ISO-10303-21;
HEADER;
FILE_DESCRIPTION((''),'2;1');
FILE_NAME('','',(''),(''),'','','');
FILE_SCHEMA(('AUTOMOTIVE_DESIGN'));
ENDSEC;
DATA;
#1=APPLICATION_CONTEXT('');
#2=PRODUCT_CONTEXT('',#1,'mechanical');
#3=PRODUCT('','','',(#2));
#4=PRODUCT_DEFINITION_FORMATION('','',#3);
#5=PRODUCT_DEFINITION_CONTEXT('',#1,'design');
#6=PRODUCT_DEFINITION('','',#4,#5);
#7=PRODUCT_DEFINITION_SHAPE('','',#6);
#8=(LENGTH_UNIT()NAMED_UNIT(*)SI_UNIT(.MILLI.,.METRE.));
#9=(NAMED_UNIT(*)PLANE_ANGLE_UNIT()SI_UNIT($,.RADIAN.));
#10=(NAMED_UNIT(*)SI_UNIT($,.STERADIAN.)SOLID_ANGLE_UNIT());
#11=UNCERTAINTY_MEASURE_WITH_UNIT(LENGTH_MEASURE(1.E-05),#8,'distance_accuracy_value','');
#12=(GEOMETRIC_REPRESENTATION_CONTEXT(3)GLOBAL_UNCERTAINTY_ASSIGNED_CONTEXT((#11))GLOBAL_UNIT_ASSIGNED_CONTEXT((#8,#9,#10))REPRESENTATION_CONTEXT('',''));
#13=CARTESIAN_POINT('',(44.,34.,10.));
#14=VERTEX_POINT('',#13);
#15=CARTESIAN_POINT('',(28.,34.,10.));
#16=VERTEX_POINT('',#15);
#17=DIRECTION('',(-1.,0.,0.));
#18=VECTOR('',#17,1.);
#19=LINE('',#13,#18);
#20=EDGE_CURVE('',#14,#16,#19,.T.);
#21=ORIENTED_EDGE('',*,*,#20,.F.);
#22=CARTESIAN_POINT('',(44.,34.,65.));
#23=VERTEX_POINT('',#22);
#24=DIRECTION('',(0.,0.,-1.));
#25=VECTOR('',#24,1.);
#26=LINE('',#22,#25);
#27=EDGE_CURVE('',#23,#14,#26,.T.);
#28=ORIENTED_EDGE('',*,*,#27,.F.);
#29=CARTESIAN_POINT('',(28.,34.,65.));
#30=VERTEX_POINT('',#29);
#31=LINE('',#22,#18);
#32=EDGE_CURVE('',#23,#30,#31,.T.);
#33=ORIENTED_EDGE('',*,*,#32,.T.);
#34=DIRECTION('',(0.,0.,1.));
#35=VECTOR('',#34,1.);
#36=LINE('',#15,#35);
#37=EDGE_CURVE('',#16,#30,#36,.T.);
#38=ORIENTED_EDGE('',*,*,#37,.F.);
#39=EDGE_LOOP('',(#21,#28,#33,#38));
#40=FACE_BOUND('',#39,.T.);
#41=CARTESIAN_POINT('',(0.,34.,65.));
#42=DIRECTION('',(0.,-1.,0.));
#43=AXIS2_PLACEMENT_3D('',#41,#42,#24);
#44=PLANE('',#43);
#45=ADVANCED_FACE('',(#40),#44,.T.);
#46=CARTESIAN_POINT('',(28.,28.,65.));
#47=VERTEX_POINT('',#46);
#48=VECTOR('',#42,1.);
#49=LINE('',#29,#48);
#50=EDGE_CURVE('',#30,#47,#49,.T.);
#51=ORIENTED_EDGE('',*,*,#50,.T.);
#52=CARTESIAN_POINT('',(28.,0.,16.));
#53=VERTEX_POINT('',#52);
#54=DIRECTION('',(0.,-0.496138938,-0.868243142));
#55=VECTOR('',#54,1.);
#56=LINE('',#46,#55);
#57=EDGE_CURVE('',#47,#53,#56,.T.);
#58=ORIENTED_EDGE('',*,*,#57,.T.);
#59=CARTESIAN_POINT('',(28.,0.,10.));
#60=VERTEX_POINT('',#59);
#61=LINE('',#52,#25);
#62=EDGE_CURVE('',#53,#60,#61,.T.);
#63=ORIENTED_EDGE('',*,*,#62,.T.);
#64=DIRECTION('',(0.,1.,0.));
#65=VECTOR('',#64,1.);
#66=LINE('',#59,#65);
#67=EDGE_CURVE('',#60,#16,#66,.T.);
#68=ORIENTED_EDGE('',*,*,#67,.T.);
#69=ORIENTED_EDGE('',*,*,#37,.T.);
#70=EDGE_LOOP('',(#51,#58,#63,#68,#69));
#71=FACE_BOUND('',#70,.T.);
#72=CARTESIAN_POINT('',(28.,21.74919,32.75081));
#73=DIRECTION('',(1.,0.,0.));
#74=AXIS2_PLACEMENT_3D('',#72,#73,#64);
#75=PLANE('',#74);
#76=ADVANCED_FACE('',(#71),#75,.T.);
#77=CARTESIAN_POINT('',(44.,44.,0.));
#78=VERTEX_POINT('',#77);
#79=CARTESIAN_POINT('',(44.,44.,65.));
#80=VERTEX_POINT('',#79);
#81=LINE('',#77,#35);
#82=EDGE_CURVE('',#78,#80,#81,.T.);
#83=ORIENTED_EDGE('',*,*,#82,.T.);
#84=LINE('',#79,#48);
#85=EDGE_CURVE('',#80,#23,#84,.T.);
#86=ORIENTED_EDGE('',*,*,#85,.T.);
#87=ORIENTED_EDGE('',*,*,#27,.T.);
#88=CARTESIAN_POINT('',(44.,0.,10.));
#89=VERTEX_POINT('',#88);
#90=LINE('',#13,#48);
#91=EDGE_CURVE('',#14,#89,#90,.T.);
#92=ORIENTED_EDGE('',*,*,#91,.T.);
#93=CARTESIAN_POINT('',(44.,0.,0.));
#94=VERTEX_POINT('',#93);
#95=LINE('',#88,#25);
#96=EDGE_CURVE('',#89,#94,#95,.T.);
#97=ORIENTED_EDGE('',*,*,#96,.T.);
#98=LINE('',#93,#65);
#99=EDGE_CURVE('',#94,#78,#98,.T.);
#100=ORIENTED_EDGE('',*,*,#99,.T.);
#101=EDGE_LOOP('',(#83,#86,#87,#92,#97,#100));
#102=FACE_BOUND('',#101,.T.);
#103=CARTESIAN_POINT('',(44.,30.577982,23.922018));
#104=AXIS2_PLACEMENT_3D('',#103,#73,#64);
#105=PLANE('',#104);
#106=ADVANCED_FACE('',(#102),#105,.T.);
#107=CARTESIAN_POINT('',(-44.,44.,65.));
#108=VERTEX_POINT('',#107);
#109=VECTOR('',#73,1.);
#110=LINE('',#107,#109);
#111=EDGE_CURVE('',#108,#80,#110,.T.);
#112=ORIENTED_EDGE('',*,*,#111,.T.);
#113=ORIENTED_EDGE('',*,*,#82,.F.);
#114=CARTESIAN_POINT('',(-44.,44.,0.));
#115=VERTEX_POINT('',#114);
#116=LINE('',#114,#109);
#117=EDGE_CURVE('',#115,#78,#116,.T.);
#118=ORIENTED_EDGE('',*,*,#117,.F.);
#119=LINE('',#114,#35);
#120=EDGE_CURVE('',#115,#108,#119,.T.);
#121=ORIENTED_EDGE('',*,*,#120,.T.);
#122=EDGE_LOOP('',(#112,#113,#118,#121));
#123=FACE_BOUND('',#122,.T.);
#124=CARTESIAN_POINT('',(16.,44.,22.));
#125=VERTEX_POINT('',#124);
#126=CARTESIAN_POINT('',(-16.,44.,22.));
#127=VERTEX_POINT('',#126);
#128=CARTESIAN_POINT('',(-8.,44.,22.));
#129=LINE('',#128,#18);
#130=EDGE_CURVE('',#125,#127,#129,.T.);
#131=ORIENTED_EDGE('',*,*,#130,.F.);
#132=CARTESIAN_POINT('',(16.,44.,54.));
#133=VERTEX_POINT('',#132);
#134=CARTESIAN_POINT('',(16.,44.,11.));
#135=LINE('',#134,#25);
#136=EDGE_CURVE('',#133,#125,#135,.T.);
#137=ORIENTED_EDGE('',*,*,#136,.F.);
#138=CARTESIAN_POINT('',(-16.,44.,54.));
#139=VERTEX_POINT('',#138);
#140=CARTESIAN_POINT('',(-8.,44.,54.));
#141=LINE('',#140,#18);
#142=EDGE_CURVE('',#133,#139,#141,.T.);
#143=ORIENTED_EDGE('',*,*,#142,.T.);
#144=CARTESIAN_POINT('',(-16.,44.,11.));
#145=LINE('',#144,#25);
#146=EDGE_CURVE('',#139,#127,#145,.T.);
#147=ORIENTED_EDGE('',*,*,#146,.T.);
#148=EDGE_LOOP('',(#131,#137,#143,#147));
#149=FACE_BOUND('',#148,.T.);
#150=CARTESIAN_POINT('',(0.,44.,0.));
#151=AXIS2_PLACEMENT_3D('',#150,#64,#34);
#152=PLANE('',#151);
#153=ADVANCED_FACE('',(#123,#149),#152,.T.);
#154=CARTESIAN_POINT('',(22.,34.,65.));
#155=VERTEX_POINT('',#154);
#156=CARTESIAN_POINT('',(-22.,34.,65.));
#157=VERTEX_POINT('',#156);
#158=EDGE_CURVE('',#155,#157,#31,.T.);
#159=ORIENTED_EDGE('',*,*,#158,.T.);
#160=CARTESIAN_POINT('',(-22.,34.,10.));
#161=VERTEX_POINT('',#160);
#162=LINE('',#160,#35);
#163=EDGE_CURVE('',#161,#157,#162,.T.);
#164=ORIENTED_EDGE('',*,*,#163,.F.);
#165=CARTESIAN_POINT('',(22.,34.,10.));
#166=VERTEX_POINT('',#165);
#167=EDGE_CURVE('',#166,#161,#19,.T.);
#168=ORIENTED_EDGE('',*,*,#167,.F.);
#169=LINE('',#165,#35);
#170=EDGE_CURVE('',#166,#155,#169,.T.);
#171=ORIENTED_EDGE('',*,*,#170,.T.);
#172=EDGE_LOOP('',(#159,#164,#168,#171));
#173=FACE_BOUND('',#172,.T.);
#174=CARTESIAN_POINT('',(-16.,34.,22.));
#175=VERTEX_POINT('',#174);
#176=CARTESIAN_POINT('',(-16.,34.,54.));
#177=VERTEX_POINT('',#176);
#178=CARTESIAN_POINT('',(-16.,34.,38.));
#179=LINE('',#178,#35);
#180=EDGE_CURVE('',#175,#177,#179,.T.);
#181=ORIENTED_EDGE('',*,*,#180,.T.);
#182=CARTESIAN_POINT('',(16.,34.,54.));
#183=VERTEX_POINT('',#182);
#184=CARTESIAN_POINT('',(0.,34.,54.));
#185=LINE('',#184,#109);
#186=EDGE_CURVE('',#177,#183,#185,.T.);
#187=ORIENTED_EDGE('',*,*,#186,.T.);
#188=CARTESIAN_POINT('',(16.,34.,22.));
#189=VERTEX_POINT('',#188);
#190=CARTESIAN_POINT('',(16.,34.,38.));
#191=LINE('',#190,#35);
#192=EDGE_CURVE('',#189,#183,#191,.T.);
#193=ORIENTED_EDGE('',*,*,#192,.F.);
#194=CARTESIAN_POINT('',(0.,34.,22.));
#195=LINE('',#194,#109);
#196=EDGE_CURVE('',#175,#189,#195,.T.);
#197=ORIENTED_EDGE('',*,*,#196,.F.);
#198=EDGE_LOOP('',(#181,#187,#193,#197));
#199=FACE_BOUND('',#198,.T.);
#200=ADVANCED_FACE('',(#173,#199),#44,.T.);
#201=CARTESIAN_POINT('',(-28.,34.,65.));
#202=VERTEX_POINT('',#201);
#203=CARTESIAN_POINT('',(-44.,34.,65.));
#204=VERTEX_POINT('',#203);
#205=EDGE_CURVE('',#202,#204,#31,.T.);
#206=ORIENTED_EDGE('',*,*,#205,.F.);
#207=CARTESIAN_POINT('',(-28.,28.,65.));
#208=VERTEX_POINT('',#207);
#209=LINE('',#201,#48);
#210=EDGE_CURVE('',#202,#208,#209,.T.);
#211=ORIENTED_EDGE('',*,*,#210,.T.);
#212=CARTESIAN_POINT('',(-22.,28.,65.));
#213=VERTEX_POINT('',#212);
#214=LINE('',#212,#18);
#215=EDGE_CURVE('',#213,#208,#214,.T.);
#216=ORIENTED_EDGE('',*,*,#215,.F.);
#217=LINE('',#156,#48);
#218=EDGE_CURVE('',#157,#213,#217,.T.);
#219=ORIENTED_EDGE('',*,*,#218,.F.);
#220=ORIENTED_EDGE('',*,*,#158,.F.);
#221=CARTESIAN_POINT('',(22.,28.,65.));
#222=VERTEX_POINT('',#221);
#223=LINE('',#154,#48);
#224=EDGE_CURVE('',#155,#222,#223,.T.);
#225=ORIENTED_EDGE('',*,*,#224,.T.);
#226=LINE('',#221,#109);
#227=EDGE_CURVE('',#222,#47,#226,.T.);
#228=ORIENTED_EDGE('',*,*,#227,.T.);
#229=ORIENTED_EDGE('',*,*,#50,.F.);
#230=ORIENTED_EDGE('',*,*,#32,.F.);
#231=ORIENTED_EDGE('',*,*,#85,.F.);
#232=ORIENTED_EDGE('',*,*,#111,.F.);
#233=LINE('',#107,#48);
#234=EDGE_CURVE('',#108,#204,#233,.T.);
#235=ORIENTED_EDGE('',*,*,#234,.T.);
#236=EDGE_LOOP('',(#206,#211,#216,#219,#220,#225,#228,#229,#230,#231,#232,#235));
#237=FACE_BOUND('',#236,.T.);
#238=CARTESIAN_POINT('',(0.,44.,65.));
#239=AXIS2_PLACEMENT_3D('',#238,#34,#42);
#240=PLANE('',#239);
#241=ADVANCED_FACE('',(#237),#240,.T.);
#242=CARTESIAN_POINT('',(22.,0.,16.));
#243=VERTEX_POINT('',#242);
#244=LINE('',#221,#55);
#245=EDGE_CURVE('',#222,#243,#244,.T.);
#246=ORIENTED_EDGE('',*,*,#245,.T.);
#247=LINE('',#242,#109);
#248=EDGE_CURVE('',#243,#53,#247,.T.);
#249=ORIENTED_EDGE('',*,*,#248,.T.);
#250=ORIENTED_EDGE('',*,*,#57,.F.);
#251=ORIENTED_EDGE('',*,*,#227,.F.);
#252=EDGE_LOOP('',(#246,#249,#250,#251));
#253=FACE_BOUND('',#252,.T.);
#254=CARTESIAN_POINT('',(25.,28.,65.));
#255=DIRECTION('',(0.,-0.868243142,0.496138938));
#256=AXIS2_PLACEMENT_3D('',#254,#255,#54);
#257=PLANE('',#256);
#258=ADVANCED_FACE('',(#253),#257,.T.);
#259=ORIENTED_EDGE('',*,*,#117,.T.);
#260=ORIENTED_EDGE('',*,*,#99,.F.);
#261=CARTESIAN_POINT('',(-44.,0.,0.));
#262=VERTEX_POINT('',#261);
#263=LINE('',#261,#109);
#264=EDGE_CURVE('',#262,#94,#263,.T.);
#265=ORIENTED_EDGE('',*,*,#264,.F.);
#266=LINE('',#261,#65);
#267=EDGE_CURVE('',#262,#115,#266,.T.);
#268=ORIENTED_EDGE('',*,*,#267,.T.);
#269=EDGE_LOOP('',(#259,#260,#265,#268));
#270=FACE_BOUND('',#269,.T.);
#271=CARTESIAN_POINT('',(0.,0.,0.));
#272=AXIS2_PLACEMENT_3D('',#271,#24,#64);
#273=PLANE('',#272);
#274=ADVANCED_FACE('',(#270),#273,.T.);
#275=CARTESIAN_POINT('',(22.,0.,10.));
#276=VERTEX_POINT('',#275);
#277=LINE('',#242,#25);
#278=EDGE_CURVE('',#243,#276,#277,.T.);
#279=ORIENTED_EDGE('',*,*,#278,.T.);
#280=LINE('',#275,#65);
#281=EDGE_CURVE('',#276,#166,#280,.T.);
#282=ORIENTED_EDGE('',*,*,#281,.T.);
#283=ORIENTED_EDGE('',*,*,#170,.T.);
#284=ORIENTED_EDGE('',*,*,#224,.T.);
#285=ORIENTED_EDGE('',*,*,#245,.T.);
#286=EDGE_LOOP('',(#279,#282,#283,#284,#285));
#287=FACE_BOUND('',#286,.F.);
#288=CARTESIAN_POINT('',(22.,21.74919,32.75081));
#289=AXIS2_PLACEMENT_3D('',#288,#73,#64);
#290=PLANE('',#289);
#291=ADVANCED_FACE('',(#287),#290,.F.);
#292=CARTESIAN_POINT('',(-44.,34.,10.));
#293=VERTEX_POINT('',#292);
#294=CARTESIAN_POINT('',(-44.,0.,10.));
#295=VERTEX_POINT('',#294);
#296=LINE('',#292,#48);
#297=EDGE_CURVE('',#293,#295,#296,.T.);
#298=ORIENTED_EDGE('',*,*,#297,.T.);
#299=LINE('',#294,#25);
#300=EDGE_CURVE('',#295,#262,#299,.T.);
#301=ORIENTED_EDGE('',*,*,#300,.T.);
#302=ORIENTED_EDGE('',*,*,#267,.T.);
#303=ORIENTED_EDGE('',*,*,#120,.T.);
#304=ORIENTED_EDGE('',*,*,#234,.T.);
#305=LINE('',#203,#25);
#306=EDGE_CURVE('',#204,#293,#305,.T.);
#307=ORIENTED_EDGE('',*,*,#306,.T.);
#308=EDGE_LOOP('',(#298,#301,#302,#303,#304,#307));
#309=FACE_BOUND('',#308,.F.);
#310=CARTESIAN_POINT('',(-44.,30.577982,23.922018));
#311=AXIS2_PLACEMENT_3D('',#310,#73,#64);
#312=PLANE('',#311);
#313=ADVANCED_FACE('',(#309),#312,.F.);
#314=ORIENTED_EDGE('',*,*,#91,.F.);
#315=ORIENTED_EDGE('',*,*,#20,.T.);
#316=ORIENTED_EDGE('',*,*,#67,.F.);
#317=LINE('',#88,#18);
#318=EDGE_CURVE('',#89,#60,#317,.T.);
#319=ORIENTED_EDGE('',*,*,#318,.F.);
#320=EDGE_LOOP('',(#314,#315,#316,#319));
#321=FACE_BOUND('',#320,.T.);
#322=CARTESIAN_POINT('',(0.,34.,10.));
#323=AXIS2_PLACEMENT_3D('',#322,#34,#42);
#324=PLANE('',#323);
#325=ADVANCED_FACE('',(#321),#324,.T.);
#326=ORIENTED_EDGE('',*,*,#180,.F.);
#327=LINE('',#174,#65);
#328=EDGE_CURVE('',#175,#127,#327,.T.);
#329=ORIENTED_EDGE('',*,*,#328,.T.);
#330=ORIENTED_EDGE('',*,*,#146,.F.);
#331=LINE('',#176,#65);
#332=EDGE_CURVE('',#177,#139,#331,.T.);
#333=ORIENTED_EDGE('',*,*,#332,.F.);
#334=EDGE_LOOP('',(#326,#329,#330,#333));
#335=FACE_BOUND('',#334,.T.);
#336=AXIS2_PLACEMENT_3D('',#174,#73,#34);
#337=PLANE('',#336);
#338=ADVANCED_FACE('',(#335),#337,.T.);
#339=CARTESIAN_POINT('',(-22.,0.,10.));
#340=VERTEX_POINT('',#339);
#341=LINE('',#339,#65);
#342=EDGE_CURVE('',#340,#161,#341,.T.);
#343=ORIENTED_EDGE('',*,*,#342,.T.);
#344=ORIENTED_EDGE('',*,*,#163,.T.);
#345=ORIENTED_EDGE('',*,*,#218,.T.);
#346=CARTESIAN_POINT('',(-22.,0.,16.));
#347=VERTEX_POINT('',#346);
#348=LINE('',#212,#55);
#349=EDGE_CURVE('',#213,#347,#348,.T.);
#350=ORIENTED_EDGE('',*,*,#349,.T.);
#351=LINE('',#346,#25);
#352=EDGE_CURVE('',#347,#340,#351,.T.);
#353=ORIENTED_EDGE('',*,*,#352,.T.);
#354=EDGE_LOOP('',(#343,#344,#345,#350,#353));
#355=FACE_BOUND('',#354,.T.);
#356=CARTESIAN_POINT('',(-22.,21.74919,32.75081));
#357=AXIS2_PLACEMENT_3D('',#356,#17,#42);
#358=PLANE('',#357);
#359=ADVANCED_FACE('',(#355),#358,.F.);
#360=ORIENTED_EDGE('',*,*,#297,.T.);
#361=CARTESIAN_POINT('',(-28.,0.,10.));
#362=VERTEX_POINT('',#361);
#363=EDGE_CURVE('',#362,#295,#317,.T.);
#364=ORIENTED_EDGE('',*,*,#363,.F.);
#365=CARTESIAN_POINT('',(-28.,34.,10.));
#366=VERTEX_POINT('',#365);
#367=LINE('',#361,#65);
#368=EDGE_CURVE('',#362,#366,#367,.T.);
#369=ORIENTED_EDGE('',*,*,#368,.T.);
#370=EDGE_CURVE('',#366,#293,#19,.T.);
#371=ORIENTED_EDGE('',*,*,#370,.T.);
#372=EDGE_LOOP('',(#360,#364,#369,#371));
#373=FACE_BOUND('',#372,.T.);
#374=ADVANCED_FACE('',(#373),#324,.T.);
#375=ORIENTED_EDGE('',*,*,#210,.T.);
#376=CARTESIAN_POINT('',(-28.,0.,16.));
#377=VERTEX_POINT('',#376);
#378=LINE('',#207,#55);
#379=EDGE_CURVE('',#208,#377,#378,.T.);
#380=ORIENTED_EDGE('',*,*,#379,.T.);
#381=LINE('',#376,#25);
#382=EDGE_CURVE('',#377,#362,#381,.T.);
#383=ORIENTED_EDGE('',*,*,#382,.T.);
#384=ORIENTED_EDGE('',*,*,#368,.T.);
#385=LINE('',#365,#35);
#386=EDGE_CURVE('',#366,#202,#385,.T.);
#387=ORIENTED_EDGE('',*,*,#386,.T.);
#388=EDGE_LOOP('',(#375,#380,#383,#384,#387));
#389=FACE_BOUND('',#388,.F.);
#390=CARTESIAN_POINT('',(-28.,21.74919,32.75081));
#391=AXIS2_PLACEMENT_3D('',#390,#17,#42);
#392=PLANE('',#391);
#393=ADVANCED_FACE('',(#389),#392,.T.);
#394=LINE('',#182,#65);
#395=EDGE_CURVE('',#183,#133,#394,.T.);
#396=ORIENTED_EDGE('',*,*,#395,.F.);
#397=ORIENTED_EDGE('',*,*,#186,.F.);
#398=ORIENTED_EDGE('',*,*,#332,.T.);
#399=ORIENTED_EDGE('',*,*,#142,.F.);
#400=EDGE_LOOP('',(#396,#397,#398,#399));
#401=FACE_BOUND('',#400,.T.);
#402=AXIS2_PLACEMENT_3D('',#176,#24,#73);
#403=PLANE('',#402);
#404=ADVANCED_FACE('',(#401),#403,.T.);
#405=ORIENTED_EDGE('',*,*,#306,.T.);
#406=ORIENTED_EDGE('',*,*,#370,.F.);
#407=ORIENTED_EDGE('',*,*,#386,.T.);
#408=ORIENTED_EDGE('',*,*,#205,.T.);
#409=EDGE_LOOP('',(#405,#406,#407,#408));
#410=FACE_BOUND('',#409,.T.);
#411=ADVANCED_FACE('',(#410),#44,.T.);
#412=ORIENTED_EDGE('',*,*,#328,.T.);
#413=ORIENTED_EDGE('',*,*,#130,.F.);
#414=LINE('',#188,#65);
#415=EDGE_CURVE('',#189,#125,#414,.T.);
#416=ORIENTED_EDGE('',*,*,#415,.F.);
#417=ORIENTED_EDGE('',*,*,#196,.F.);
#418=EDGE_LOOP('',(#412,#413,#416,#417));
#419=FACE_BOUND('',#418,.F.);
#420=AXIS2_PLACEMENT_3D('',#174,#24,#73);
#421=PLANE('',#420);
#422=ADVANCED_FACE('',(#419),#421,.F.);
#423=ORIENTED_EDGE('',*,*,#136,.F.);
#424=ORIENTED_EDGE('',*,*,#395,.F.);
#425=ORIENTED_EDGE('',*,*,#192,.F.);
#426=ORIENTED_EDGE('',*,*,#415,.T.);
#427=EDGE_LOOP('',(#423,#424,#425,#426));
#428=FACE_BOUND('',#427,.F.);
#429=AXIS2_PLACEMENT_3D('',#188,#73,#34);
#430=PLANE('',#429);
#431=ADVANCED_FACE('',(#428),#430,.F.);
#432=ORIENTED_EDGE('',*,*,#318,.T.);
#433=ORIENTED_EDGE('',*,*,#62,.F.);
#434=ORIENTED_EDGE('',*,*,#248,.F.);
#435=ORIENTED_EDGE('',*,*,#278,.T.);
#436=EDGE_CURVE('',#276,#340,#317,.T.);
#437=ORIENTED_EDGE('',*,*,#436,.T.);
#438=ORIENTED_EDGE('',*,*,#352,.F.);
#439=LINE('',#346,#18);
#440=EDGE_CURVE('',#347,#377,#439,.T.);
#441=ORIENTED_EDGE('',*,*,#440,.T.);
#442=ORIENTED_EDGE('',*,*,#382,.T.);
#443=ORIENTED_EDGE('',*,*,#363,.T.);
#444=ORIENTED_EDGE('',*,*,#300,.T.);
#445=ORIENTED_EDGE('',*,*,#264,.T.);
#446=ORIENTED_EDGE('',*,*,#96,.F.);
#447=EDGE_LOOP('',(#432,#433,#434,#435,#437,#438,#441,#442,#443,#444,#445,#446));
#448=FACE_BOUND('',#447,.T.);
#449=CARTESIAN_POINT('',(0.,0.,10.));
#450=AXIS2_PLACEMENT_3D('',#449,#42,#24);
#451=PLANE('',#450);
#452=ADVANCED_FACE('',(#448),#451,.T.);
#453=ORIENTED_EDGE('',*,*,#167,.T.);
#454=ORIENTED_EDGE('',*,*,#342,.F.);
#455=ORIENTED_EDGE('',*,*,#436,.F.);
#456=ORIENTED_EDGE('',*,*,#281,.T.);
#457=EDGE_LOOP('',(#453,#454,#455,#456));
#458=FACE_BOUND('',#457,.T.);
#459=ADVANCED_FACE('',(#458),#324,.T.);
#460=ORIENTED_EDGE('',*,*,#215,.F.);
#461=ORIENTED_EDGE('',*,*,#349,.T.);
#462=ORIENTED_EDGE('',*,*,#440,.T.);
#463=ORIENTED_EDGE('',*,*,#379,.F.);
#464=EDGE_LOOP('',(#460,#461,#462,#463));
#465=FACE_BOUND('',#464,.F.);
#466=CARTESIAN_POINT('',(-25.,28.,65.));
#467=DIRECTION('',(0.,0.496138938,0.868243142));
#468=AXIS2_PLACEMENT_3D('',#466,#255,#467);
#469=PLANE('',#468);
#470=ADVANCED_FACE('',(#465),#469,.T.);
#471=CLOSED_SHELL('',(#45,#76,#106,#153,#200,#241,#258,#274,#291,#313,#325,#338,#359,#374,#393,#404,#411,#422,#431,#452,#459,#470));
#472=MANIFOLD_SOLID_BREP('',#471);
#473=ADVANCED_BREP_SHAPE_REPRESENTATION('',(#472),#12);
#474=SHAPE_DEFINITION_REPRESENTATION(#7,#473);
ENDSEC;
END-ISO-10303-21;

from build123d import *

# Parameters (mm, degrees)
F1_DEPTH = 44
F2_W     = 32
F2_H     = 32
F3_DEPTH = 10.001
F6_DEPTH = 3


# Not quite as in the source:
# - a pattern or mirror of a feature is missing from the dataset's text; its kind, count and spacing are read off the source's solid


with BuildPart() as f1:
    # F0 (on Right) → F1 (new body, symmetric)
    with BuildSketch(Plane.YZ):
        Polygon((0, 10), (0, 0), (44, 0), (44, 65), (34, 65), (34, 10), align=None)
    extrude(amount=F1_DEPTH, both=True)

    # F2 (on face) → F3 (cut, through all)
    with BuildSketch(Plane.XZ.offset(-34)):
        with Locations((0, 38)):
            Rectangle(F2_W, F2_H)
    extrude(amount=-F3_DEPTH, mode=Mode.SUBTRACT)

    # F5 (on offset) → F6 (join, symmetric)
    with BuildSketch(Plane.YZ.offset(25)):
        Polygon((34, 65), (28, 65), (0, 16), (0, 10), (34, 10), align=None)
    f6 = extrude(amount=F6_DEPTH, both=True)

    # F6_copies: F6 across plane
    add(f6.mirror(Plane(origin=(0, 0, 0), x_dir=(0, 0, -1), z_dir=(-1, 0, 0))))


solid = f1.part
